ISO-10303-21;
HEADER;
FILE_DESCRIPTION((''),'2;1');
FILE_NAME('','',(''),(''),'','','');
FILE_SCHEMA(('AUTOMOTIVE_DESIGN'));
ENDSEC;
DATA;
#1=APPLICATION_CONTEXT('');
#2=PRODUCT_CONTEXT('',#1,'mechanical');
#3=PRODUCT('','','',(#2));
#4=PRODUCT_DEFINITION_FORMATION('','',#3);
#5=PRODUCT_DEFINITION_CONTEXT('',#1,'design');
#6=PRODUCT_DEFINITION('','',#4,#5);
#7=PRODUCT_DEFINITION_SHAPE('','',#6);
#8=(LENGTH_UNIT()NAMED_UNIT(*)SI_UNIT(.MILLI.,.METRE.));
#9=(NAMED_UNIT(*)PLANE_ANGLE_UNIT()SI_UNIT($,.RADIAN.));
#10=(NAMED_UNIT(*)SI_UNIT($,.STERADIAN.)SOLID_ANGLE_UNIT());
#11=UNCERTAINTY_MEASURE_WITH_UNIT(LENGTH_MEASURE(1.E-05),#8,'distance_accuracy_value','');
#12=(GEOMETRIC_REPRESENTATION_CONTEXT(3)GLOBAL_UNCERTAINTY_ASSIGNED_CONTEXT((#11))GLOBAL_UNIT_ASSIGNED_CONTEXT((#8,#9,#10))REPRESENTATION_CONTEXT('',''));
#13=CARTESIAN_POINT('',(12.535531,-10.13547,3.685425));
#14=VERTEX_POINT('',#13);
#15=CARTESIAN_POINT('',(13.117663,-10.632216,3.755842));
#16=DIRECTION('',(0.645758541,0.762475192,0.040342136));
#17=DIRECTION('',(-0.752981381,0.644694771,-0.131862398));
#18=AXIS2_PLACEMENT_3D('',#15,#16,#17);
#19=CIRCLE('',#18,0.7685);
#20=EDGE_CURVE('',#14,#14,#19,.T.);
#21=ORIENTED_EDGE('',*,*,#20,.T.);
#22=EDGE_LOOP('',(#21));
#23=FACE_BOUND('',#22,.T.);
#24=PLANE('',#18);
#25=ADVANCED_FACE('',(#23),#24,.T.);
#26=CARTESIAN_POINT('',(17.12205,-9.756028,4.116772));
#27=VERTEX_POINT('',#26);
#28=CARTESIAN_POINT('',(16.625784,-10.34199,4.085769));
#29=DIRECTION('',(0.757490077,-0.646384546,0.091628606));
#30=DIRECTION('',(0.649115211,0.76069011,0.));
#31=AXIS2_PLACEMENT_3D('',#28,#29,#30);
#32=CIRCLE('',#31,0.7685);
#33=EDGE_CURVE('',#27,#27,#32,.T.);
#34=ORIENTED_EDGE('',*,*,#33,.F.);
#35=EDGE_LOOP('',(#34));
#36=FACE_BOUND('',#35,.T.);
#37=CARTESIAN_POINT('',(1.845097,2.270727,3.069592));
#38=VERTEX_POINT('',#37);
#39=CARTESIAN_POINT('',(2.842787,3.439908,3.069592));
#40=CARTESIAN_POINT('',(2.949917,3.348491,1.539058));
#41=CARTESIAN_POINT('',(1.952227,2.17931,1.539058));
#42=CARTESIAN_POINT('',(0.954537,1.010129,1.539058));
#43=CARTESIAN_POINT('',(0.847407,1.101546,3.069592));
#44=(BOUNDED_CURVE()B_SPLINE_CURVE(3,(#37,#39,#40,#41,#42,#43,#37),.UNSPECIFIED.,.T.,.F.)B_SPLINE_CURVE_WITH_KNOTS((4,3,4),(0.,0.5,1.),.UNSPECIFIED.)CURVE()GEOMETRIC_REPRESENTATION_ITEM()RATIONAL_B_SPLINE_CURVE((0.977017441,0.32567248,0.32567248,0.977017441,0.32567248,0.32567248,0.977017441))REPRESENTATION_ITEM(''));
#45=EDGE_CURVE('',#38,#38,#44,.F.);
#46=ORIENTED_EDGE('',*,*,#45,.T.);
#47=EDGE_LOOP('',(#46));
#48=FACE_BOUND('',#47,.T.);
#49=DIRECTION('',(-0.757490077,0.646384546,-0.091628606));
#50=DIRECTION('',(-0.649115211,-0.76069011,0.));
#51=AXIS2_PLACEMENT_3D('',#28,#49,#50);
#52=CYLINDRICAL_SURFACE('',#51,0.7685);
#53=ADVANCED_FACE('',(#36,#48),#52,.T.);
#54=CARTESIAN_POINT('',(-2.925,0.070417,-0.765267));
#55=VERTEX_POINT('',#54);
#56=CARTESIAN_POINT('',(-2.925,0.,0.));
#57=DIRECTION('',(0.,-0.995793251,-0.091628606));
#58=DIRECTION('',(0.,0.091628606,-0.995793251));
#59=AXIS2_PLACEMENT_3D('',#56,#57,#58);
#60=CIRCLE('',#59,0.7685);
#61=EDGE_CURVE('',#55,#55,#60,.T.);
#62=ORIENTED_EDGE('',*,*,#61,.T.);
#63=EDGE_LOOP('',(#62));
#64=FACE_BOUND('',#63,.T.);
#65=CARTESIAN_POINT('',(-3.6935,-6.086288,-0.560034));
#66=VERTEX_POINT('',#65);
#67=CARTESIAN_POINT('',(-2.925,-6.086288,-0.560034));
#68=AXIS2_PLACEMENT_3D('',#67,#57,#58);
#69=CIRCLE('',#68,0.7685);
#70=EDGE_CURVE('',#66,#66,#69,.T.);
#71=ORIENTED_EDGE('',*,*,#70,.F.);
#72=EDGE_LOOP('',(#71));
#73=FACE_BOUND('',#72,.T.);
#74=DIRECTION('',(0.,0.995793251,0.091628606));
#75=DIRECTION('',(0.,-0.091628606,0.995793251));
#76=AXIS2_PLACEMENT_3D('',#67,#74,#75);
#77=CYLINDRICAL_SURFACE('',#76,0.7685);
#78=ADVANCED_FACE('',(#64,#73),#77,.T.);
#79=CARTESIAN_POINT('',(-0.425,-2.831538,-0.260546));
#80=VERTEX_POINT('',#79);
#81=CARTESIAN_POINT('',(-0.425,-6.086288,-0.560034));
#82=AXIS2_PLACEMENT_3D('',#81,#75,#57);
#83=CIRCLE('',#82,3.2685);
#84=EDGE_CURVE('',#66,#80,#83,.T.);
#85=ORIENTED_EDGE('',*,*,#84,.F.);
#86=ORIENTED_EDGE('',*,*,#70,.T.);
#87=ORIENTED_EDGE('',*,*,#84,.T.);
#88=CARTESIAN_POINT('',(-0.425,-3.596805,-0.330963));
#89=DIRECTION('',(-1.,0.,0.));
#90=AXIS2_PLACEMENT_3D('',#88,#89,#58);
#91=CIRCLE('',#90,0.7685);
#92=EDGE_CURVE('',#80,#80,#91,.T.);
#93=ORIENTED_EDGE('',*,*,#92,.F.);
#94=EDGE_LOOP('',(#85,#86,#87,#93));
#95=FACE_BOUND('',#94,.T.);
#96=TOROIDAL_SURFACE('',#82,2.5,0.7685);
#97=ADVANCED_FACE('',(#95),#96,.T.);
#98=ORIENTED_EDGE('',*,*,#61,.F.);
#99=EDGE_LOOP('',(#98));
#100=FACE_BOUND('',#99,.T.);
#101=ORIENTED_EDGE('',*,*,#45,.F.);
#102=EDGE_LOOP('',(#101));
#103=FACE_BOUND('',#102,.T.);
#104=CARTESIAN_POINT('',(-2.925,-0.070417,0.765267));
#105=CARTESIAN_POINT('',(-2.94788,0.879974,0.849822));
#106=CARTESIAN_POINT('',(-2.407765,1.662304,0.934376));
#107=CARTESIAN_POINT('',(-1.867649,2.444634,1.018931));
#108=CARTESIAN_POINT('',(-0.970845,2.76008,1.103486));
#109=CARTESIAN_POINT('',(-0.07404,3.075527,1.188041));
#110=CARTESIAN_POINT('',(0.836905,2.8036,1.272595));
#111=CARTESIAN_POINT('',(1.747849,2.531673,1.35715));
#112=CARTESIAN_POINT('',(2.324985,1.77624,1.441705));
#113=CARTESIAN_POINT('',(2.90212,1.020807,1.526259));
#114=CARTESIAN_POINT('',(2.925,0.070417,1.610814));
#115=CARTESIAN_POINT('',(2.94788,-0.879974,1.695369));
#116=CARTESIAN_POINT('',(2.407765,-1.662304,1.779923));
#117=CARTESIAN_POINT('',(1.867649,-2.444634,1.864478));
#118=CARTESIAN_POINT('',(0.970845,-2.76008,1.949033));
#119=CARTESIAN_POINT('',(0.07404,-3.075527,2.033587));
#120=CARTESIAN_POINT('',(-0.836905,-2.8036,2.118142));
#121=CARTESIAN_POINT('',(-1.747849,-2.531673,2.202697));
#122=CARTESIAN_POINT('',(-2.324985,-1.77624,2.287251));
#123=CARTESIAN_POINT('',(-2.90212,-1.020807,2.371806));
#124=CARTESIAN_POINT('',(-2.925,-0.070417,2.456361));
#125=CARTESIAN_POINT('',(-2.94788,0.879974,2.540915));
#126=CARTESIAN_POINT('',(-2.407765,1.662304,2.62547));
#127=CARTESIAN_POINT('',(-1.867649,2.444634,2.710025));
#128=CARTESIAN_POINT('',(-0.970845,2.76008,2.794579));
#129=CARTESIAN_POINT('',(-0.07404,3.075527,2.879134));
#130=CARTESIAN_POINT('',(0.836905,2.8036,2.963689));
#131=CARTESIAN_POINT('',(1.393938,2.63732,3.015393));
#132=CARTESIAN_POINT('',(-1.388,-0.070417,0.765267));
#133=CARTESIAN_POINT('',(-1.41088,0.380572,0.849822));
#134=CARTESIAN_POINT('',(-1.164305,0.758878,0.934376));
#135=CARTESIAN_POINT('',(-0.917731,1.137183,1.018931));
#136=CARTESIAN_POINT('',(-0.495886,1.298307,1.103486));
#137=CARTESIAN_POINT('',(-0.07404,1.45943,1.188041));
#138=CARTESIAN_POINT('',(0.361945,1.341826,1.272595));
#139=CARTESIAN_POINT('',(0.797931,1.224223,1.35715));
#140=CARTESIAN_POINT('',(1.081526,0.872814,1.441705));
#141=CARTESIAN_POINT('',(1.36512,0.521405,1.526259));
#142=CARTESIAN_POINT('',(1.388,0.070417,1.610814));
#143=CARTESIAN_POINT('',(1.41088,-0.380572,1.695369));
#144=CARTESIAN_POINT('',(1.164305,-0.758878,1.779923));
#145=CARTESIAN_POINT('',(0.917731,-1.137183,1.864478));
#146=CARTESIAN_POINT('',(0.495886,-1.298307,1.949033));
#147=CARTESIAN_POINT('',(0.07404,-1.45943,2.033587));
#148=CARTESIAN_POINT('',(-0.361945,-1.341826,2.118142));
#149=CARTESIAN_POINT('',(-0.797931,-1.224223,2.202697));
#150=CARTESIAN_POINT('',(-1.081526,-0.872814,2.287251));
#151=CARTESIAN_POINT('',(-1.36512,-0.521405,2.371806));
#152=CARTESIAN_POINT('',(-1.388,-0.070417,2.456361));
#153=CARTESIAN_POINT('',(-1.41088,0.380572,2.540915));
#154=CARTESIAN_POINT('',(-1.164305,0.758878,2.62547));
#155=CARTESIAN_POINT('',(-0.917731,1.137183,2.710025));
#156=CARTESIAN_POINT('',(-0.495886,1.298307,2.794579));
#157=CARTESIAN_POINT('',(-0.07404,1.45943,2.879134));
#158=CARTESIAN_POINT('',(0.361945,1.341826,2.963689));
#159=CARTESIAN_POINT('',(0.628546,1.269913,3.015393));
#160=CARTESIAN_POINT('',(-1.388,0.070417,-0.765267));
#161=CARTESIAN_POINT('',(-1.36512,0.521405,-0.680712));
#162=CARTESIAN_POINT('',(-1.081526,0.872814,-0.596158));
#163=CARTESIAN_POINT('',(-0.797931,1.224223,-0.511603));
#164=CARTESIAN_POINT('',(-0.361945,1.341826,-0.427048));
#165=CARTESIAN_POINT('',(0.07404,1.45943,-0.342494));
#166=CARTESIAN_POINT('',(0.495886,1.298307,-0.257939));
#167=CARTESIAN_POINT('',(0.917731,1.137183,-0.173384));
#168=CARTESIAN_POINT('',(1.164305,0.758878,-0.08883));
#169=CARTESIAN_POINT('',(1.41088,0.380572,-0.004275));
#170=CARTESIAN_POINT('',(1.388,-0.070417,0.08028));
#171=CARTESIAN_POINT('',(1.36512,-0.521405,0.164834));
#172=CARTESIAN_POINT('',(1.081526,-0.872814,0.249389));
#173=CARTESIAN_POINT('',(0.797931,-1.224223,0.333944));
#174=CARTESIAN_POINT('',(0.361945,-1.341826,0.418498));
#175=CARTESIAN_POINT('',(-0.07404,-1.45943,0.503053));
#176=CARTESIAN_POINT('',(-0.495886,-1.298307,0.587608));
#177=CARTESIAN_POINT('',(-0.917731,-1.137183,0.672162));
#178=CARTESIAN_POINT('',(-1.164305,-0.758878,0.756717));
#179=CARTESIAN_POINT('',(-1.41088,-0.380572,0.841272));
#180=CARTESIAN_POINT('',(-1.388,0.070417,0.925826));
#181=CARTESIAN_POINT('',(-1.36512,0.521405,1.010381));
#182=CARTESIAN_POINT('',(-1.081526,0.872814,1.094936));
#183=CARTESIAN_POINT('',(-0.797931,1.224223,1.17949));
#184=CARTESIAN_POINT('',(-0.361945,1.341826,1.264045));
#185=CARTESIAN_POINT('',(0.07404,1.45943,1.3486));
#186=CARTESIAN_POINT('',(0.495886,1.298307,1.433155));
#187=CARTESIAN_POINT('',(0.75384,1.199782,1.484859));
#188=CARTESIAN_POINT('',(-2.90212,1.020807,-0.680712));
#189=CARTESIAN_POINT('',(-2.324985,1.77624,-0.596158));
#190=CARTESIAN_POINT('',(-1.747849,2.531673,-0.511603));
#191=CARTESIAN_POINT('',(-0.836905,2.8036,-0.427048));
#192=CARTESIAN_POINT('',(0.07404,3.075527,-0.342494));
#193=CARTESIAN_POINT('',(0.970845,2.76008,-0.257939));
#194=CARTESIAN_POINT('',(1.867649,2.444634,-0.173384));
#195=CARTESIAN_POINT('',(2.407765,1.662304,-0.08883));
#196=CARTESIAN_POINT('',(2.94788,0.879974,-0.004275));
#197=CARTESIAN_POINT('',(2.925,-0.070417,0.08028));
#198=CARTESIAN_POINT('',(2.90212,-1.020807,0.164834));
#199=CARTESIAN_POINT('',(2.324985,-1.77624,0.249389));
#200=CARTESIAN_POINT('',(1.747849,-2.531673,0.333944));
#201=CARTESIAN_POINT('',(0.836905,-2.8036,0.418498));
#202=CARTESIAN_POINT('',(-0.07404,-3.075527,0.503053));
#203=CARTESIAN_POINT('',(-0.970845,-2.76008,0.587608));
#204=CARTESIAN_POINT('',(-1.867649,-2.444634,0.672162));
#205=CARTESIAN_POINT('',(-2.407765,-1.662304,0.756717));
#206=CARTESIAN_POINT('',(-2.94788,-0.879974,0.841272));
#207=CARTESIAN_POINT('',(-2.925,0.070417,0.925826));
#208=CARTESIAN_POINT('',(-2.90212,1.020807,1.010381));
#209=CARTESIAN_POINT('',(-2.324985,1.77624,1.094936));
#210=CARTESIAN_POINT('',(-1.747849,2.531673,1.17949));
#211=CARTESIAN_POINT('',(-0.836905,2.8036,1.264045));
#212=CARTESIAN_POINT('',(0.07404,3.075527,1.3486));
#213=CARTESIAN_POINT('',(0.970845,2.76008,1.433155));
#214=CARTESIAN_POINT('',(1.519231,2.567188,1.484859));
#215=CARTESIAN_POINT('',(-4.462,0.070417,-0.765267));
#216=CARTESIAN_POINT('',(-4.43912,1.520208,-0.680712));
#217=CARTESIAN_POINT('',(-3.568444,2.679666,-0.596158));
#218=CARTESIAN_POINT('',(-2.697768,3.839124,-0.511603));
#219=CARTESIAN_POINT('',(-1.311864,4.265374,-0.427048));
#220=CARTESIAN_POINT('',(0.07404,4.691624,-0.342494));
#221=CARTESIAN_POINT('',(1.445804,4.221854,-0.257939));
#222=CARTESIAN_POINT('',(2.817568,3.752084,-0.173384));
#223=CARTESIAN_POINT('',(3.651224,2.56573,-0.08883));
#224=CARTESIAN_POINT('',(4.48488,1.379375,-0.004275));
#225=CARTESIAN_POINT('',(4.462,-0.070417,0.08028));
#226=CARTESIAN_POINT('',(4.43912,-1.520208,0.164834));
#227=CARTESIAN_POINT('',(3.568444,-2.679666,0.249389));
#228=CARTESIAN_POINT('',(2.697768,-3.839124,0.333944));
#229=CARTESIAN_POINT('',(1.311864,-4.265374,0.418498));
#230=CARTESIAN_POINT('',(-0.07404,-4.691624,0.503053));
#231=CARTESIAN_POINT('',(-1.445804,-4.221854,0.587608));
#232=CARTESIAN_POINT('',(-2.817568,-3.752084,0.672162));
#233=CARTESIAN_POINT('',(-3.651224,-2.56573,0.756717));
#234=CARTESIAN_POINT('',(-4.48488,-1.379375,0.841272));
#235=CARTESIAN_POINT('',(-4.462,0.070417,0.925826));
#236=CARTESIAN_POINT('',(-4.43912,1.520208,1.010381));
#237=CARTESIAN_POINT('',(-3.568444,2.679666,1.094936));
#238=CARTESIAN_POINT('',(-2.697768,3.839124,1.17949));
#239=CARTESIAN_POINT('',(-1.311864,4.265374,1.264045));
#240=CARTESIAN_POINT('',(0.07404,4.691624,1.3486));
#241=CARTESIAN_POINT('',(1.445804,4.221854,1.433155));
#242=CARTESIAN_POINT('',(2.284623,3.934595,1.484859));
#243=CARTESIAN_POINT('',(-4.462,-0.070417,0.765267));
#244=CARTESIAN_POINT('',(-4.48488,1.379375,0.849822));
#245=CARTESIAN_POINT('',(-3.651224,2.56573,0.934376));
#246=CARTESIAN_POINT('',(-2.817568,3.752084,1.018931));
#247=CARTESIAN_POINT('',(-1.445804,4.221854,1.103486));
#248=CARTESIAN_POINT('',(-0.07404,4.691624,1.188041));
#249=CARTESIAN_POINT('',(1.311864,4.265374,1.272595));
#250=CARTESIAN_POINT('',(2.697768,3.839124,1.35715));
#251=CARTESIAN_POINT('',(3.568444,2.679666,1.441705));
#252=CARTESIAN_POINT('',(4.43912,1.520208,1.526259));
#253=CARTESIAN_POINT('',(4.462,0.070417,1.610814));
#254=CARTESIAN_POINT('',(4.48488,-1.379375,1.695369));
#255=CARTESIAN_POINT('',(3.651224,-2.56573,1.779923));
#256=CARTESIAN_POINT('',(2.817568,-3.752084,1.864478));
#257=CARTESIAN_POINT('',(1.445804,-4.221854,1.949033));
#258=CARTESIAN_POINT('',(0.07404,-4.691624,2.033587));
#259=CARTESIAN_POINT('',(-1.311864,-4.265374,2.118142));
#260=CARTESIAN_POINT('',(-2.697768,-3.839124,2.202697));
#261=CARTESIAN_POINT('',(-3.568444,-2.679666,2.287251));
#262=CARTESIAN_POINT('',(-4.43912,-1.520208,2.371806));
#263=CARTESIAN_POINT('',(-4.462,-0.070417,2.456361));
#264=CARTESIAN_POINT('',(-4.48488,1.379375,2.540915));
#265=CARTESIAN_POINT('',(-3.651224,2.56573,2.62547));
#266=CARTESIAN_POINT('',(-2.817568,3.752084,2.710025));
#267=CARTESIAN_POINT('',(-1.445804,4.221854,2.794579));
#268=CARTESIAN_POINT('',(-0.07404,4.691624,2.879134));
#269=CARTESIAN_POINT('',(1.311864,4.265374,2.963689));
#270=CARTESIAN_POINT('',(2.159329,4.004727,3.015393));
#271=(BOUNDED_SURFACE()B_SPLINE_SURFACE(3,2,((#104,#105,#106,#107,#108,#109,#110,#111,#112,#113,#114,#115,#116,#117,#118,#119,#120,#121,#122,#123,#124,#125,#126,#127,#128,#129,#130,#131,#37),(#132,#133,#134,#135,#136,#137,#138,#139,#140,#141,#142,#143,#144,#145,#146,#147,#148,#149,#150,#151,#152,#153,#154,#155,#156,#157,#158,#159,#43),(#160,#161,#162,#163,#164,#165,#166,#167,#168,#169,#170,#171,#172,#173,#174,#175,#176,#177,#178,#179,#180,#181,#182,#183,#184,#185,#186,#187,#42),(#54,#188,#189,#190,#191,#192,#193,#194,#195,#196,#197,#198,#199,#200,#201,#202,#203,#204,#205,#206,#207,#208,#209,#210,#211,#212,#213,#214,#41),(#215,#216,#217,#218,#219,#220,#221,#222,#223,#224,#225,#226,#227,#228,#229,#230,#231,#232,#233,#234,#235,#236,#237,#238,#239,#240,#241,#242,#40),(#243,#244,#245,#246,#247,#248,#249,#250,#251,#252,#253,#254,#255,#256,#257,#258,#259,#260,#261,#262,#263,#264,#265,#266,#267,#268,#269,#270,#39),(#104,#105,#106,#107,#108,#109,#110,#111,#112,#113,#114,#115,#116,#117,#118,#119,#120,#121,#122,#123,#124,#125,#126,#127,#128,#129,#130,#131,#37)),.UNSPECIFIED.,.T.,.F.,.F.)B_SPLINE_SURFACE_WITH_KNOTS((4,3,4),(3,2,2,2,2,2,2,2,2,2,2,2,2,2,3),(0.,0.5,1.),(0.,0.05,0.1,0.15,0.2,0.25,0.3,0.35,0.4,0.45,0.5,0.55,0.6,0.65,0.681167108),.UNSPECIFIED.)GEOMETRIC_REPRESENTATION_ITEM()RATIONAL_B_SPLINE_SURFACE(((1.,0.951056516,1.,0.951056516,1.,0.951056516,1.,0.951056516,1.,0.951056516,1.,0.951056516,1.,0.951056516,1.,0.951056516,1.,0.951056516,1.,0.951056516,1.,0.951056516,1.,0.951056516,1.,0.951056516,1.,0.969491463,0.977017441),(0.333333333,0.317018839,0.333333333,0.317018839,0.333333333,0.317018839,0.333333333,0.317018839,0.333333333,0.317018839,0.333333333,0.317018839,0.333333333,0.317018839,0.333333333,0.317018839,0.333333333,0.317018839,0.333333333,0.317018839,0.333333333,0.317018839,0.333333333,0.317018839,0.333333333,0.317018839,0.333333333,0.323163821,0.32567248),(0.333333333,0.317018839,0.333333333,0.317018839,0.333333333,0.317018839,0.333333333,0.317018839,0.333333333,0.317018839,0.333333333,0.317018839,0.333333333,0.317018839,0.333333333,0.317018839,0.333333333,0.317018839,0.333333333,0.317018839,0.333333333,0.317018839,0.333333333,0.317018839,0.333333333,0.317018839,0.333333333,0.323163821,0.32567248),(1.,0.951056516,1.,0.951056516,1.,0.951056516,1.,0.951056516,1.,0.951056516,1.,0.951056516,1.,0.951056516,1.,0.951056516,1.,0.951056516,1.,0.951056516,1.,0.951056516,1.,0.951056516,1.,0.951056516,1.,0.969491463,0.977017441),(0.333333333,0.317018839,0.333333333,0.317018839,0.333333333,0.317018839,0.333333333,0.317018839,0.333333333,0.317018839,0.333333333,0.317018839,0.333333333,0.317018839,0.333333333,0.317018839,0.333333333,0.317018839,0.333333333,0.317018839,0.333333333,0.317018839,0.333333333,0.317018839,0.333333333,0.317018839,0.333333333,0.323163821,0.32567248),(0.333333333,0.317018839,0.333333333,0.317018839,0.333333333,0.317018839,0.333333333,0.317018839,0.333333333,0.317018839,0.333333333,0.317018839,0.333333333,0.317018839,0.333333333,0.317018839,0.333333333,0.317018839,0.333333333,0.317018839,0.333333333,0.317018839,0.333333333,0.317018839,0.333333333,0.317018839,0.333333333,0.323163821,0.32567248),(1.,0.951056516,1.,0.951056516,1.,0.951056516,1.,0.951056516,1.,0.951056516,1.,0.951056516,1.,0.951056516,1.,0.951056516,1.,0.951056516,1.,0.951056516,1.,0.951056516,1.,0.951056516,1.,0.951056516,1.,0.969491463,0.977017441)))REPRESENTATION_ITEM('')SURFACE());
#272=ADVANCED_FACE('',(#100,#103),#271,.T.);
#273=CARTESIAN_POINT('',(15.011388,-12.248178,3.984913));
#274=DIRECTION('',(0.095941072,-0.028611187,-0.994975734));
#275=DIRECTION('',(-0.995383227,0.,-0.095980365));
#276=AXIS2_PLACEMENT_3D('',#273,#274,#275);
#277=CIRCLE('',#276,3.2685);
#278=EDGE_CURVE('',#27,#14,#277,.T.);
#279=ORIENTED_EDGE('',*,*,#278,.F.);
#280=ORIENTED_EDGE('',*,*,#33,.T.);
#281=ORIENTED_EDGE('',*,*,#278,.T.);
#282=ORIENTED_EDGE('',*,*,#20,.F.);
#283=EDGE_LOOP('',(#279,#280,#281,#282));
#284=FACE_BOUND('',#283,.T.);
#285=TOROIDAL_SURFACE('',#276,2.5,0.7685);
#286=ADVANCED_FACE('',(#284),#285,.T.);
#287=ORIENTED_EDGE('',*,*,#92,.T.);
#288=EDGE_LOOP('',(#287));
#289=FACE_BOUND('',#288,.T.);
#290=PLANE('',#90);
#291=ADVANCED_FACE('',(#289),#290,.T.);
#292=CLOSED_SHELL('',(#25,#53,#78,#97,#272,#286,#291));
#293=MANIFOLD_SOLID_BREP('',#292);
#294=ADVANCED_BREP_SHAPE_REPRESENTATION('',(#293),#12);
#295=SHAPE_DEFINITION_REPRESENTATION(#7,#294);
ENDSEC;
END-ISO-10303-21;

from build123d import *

# Parameters (mm, degrees)
SWEEP1_PITCH        = 1.691093574
SWEEP1_HEIGHT       = 2.304
SWEEP1_RADIUS       = 2.925
SWEEP1_START_ANGLE  = -180
SWEEP1_PROFILE_R    = 0.7685
SKETCH7_R           = 0.7685
BOSS_EXTRUDE1_DEPTH = 6.112
SKETCH8_R           = 0.7685
BOSS_EXTRUDE2_DEPTH = 19.442
SKETCH11_R          = 0.7685
SKETCH13_R          = 0.7685


with BuildPart() as part:
    # Sweep1: sweep along a helix
    with BuildLine() as sweep1_path:
        add(Helix(SWEEP1_PITCH, SWEEP1_HEIGHT, SWEEP1_RADIUS, center=(0, 0, 0), direction=(0, 0, 1), lefthand=True, mode=Mode.PRIVATE).rotate(Axis((0, 0, 0), (0, 0, 1)), SWEEP1_START_ANGLE))
    # Sweep1 profile (on start of the path) → Sweep1 (sweep)
    with BuildSketch(Plane(origin=(-2.925, 0, 0), x_dir=(0, -0.09162860589234262, 0.9957932509222112), z_dir=(-7.6569073854344e-14, 0.9957932509222112, 0.09162860589234262))):
        Circle(SWEEP1_PROFILE_R)
    sweep(path=sweep1_path.line, is_frenet=True)

    # Sketch7 → Boss-Extrude1 (add)
    with BuildSketch(Plane(origin=(0, 0, 0), x_dir=(1, 0, 0), z_dir=(6.564467280906747e-15, -0.9957932509222046, -0.09162860589241552))):
        with Locations(Location((-2.925, 0, 0), (0, 0, 90))):
            Circle(SKETCH7_R)
    extrude(amount=BOSS_EXTRUDE1_DEPTH)


with BuildPart() as boss_extrude2_tool:
    # Sketch8 → Boss-Extrude2 (new body)
    with BuildSketch(Plane(origin=(0.159938056, -0.136479, 0.019346658), x_dir=(0.09594107198175887, -0.028611187354864856, -0.9949757337066748), z_dir=(0.7574900772078451, -0.646384546159533, 0.09162860589241528))):
        with Locations(Location((-2.174248504, 3.015560064, 0), (0, 0, 177.678165763))):
            Circle(SKETCH8_R)
    extrude(amount=BOSS_EXTRUDE2_DEPTH)


with BuildPart() as part_1:
    add(part.part)


with BuildPart() as part_2:
    # Boss-Extrude2: joined with boss_extrude2_tool
    add(part_1.part.fuse(boss_extrude2_tool.part, tol=0.00001))

    # Sweep2: sweep along a path in Sketch10
    with BuildLine(Plane(origin=(0, 0, 0), x_dir=(1, 0, 0), z_dir=(0, -0.09162860589241552, 0.9957932509222045))) as sweep2_path:
        ThreePointArc((-2.925, -6.112), (1.342766953, -7.879766953), (-0.425, -3.612))
    # Sketch11 → Sweep2 (sweep)
    with BuildSketch(Plane(origin=(0, -6.08628835, -0.560034039), x_dir=(1, 0, 0), z_dir=(6.564467280906748e-15, -0.9957932509222046, -0.09162860589241552))):
        with Locations((-2.925, 0)):
            Circle(SKETCH11_R)
    sweep(path=sweep2_path.line)

    # Sweep3: sweep along a path in Sketch12
    with BuildLine(Plane(origin=(-0.208599732, 0.062207831, 2.1633245), x_dir=(-0.9953867575774242, -0.002038063344902809, -0.09592209931660459), z_dir=(0.09594107198175894, -0.02861118735486476, -0.9949757337066749))) as sweep3_path:
        ThreePointArc((-16.919923176, -10.442978366), (-15.499640038, -14.838616041), (-13.395746669, -10.726138995))
    # Sketch13 → Sweep3 (sweep)
    with BuildSketch(Plane(origin=(14.887060137, -12.703487346, 1.800790013), x_dir=(0.09594107198175886, -0.028611187354864908, -0.9949757337066749), z_dir=(0.7574900772078451, -0.646384546159533, 0.0916286058924153))):
        with Locations((-2.174248504, 3.015560064)):
            Circle(SKETCH13_R)
    sweep(path=sweep3_path.line)


solid = part_2.part
